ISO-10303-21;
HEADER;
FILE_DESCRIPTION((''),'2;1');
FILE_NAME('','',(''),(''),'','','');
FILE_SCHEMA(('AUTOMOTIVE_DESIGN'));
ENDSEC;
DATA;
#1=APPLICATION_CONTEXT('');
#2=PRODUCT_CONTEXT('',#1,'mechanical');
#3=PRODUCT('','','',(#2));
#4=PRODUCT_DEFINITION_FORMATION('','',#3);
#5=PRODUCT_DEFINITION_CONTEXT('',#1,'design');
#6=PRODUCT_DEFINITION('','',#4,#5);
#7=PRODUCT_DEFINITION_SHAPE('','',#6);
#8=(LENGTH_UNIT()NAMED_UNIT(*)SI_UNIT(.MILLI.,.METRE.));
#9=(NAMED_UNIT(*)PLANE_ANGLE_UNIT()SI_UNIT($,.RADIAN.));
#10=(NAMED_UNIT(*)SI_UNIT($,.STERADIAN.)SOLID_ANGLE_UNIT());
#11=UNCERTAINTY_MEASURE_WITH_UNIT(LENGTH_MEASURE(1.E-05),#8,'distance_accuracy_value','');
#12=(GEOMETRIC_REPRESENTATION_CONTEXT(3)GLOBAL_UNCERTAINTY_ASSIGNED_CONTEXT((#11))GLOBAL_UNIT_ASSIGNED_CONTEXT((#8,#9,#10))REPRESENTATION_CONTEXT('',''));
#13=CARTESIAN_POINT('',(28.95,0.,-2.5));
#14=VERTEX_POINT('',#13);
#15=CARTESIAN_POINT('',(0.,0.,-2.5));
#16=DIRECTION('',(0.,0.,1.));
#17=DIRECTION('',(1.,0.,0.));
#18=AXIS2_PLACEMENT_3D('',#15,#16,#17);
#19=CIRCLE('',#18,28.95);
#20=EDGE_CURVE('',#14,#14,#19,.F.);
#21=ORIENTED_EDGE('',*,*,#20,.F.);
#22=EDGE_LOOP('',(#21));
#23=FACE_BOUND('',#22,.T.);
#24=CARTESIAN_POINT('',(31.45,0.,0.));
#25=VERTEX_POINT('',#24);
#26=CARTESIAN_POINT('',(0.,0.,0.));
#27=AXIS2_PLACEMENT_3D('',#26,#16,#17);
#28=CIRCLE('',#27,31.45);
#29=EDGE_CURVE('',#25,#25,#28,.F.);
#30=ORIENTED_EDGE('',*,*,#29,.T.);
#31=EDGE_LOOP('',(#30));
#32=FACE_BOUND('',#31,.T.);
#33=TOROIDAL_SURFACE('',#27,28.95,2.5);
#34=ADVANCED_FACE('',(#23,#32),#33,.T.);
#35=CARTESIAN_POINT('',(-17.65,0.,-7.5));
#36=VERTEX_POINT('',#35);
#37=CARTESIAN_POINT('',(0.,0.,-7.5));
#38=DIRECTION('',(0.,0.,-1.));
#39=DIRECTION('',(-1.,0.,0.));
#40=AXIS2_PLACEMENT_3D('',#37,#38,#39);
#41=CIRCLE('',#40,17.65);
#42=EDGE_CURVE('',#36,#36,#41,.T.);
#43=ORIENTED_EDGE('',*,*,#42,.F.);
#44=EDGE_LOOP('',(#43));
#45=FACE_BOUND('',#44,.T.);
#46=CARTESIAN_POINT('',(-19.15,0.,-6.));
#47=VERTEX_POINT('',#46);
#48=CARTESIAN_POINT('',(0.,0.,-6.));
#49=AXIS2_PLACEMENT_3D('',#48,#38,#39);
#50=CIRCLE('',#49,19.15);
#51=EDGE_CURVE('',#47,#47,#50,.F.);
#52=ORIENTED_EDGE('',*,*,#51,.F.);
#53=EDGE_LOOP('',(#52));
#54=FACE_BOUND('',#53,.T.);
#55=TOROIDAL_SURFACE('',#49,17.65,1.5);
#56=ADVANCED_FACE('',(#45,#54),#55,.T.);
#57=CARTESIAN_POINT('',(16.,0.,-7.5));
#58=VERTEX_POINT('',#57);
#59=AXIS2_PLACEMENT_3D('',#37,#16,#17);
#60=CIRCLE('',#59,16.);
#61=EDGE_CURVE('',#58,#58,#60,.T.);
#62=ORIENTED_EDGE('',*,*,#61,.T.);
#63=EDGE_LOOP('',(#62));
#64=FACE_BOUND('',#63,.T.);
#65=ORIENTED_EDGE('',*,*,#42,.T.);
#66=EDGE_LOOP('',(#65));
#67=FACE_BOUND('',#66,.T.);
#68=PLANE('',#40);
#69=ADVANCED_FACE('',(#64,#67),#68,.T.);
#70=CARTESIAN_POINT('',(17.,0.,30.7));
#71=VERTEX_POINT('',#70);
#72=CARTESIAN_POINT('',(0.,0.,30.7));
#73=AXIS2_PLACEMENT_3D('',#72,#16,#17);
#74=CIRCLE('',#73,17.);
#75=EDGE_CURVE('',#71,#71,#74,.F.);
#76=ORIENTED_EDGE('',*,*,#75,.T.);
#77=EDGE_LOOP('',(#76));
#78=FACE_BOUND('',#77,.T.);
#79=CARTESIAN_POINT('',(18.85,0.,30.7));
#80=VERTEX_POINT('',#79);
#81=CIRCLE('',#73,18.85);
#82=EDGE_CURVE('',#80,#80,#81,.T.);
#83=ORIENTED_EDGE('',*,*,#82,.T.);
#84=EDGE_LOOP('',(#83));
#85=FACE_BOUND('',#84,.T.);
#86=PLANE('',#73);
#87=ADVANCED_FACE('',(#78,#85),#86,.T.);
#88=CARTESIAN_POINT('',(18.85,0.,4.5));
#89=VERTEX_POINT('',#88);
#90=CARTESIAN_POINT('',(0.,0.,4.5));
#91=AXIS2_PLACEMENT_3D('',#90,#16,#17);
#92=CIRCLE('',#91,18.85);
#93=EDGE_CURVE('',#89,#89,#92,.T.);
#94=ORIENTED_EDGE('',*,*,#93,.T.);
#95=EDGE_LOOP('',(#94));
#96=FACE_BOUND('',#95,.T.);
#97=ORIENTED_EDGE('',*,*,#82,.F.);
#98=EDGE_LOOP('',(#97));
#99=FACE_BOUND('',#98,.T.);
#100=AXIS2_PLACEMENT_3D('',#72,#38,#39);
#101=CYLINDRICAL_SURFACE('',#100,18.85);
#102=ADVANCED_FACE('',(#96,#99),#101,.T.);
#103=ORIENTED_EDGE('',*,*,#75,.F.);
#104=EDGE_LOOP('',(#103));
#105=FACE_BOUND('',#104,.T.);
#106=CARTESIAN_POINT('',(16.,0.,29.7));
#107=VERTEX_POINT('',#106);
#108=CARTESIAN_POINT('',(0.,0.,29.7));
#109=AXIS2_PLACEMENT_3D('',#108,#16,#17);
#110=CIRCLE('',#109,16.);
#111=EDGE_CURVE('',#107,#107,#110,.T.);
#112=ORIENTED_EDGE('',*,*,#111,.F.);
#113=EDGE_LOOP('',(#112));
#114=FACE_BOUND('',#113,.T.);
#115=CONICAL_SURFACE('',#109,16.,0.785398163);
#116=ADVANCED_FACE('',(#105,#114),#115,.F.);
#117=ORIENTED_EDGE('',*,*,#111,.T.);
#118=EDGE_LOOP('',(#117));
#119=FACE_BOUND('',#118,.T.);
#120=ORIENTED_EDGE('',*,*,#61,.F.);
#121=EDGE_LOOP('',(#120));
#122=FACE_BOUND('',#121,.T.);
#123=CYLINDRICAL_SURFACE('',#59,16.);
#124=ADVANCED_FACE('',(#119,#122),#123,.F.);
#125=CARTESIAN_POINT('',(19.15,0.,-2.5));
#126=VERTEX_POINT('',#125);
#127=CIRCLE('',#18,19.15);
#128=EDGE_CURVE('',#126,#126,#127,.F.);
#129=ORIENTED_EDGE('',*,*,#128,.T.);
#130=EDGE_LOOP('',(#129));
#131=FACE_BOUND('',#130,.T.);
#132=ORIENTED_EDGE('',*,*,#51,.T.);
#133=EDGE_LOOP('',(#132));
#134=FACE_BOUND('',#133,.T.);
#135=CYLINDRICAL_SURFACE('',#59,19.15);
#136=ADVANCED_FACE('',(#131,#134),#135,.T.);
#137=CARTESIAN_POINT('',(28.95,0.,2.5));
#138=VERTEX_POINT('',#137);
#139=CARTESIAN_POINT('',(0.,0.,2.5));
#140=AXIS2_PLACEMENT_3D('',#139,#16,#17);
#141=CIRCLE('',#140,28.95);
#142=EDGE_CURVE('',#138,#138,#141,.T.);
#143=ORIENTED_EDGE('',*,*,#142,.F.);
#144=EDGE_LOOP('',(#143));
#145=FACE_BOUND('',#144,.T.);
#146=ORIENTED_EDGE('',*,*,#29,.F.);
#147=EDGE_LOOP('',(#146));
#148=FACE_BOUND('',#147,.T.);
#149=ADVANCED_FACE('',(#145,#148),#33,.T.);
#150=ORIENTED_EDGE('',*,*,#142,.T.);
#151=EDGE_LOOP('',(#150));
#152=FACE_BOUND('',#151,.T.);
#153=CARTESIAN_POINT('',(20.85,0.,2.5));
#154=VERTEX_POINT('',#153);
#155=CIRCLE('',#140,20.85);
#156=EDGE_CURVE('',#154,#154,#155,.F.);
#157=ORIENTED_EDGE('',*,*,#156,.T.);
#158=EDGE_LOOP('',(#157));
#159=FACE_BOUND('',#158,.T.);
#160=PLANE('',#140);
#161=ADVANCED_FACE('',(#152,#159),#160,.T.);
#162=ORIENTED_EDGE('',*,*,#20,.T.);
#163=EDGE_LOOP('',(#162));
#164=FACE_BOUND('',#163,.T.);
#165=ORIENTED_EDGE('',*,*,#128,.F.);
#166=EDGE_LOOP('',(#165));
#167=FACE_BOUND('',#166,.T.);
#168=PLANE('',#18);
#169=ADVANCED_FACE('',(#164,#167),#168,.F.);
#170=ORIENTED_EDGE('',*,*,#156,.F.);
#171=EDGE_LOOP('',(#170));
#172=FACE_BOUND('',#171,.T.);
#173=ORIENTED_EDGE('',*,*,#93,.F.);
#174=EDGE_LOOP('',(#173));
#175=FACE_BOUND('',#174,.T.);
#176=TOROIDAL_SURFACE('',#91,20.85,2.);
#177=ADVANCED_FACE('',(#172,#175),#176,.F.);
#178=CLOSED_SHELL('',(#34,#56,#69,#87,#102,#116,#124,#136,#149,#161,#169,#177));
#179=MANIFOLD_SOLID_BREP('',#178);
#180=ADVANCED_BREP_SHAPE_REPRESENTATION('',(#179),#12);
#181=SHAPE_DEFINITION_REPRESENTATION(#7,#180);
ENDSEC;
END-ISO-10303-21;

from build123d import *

# Parameters (mm, degrees)
BOSS_EXTRUDE1_START     = -2.5
BOSS_EXTRUDE1_OUTLINE_R = 31.45
BOSS_EXTRUDE1_DEPTH     = 5
SKETCH2_R               = 18.85
BOSS_EXTRUDE2_DEPTH     = 28.2
SKETCH3_R               = 19.15
BOSS_EXTRUDE3_DEPTH     = 5
SKETCH5_R               = 16
CUT_EXTRUDE2_DEPTH      = 59.629727954
FILLET7_R               = 2
CHAMFER2_SIZE           = 1
FILLET8_R               = 2.5
FILLET9_R               = 1.5


# Read off the part's stored shape, not the designer's step: Boss-Extrude1
with BuildPart() as part:
    # Boss-Extrude1 outline → Boss-Extrude1 (new body)
    with BuildSketch(Plane.XY.offset(BOSS_EXTRUDE1_START)):
        Circle(BOSS_EXTRUDE1_OUTLINE_R)
    extrude(amount=BOSS_EXTRUDE1_DEPTH)

    # Sketch2 → Boss-Extrude2 (add)
    with BuildSketch(Plane.XY.offset(2.5)):
        Circle(SKETCH2_R)
    extrude(amount=BOSS_EXTRUDE2_DEPTH)

    # Sketch3 → Boss-Extrude3 (add)
    with BuildSketch(Plane(origin=(0, 0, -2.5), x_dir=(-1, 0, 0), z_dir=(0, 0, -1))):
        with Locations(Location((0, 0, 0), (0, 0, 180))):
            Circle(SKETCH3_R)
    extrude(amount=BOSS_EXTRUDE3_DEPTH)

    # Sketch5 → Cut-Extrude2 (cut, through all)
    with BuildSketch(Plane.XY.offset(30.7)):
        Circle(SKETCH5_R)
    extrude(amount=-CUT_EXTRUDE2_DEPTH, mode=Mode.SUBTRACT)

    # Fillet7
    fillet7_edges = [part.edges().sort_by_distance(p)[0] for p in [
        (-18.85, 0, 2.5),
    ]]
    fillet(fillet7_edges, radius=FILLET7_R)

    # Chamfer2
    chamfer2_edges = [part.edges().sort_by_distance(p)[0] for p in [
        (-16, 0, 30.7),
    ]]
    chamfer(chamfer2_edges, length=CHAMFER2_SIZE)

    # Fillet8
    fillet8_edges = [part.edges().sort_by_distance(p)[0] for p in [
        (-31.45, 0, -2.5),
        (-31.45, 0, 2.5),
    ]]
    fillet(fillet8_edges, radius=FILLET8_R - 0.0001)  # a hair under: the kernel refuses the full size

    # Fillet9
    fillet9_edges = [part.edges().sort_by_distance(p)[0] for p in [
        (-19.15, 0, -7.5),
    ]]
    fillet(fillet9_edges, radius=FILLET9_R)


solid = part.part
